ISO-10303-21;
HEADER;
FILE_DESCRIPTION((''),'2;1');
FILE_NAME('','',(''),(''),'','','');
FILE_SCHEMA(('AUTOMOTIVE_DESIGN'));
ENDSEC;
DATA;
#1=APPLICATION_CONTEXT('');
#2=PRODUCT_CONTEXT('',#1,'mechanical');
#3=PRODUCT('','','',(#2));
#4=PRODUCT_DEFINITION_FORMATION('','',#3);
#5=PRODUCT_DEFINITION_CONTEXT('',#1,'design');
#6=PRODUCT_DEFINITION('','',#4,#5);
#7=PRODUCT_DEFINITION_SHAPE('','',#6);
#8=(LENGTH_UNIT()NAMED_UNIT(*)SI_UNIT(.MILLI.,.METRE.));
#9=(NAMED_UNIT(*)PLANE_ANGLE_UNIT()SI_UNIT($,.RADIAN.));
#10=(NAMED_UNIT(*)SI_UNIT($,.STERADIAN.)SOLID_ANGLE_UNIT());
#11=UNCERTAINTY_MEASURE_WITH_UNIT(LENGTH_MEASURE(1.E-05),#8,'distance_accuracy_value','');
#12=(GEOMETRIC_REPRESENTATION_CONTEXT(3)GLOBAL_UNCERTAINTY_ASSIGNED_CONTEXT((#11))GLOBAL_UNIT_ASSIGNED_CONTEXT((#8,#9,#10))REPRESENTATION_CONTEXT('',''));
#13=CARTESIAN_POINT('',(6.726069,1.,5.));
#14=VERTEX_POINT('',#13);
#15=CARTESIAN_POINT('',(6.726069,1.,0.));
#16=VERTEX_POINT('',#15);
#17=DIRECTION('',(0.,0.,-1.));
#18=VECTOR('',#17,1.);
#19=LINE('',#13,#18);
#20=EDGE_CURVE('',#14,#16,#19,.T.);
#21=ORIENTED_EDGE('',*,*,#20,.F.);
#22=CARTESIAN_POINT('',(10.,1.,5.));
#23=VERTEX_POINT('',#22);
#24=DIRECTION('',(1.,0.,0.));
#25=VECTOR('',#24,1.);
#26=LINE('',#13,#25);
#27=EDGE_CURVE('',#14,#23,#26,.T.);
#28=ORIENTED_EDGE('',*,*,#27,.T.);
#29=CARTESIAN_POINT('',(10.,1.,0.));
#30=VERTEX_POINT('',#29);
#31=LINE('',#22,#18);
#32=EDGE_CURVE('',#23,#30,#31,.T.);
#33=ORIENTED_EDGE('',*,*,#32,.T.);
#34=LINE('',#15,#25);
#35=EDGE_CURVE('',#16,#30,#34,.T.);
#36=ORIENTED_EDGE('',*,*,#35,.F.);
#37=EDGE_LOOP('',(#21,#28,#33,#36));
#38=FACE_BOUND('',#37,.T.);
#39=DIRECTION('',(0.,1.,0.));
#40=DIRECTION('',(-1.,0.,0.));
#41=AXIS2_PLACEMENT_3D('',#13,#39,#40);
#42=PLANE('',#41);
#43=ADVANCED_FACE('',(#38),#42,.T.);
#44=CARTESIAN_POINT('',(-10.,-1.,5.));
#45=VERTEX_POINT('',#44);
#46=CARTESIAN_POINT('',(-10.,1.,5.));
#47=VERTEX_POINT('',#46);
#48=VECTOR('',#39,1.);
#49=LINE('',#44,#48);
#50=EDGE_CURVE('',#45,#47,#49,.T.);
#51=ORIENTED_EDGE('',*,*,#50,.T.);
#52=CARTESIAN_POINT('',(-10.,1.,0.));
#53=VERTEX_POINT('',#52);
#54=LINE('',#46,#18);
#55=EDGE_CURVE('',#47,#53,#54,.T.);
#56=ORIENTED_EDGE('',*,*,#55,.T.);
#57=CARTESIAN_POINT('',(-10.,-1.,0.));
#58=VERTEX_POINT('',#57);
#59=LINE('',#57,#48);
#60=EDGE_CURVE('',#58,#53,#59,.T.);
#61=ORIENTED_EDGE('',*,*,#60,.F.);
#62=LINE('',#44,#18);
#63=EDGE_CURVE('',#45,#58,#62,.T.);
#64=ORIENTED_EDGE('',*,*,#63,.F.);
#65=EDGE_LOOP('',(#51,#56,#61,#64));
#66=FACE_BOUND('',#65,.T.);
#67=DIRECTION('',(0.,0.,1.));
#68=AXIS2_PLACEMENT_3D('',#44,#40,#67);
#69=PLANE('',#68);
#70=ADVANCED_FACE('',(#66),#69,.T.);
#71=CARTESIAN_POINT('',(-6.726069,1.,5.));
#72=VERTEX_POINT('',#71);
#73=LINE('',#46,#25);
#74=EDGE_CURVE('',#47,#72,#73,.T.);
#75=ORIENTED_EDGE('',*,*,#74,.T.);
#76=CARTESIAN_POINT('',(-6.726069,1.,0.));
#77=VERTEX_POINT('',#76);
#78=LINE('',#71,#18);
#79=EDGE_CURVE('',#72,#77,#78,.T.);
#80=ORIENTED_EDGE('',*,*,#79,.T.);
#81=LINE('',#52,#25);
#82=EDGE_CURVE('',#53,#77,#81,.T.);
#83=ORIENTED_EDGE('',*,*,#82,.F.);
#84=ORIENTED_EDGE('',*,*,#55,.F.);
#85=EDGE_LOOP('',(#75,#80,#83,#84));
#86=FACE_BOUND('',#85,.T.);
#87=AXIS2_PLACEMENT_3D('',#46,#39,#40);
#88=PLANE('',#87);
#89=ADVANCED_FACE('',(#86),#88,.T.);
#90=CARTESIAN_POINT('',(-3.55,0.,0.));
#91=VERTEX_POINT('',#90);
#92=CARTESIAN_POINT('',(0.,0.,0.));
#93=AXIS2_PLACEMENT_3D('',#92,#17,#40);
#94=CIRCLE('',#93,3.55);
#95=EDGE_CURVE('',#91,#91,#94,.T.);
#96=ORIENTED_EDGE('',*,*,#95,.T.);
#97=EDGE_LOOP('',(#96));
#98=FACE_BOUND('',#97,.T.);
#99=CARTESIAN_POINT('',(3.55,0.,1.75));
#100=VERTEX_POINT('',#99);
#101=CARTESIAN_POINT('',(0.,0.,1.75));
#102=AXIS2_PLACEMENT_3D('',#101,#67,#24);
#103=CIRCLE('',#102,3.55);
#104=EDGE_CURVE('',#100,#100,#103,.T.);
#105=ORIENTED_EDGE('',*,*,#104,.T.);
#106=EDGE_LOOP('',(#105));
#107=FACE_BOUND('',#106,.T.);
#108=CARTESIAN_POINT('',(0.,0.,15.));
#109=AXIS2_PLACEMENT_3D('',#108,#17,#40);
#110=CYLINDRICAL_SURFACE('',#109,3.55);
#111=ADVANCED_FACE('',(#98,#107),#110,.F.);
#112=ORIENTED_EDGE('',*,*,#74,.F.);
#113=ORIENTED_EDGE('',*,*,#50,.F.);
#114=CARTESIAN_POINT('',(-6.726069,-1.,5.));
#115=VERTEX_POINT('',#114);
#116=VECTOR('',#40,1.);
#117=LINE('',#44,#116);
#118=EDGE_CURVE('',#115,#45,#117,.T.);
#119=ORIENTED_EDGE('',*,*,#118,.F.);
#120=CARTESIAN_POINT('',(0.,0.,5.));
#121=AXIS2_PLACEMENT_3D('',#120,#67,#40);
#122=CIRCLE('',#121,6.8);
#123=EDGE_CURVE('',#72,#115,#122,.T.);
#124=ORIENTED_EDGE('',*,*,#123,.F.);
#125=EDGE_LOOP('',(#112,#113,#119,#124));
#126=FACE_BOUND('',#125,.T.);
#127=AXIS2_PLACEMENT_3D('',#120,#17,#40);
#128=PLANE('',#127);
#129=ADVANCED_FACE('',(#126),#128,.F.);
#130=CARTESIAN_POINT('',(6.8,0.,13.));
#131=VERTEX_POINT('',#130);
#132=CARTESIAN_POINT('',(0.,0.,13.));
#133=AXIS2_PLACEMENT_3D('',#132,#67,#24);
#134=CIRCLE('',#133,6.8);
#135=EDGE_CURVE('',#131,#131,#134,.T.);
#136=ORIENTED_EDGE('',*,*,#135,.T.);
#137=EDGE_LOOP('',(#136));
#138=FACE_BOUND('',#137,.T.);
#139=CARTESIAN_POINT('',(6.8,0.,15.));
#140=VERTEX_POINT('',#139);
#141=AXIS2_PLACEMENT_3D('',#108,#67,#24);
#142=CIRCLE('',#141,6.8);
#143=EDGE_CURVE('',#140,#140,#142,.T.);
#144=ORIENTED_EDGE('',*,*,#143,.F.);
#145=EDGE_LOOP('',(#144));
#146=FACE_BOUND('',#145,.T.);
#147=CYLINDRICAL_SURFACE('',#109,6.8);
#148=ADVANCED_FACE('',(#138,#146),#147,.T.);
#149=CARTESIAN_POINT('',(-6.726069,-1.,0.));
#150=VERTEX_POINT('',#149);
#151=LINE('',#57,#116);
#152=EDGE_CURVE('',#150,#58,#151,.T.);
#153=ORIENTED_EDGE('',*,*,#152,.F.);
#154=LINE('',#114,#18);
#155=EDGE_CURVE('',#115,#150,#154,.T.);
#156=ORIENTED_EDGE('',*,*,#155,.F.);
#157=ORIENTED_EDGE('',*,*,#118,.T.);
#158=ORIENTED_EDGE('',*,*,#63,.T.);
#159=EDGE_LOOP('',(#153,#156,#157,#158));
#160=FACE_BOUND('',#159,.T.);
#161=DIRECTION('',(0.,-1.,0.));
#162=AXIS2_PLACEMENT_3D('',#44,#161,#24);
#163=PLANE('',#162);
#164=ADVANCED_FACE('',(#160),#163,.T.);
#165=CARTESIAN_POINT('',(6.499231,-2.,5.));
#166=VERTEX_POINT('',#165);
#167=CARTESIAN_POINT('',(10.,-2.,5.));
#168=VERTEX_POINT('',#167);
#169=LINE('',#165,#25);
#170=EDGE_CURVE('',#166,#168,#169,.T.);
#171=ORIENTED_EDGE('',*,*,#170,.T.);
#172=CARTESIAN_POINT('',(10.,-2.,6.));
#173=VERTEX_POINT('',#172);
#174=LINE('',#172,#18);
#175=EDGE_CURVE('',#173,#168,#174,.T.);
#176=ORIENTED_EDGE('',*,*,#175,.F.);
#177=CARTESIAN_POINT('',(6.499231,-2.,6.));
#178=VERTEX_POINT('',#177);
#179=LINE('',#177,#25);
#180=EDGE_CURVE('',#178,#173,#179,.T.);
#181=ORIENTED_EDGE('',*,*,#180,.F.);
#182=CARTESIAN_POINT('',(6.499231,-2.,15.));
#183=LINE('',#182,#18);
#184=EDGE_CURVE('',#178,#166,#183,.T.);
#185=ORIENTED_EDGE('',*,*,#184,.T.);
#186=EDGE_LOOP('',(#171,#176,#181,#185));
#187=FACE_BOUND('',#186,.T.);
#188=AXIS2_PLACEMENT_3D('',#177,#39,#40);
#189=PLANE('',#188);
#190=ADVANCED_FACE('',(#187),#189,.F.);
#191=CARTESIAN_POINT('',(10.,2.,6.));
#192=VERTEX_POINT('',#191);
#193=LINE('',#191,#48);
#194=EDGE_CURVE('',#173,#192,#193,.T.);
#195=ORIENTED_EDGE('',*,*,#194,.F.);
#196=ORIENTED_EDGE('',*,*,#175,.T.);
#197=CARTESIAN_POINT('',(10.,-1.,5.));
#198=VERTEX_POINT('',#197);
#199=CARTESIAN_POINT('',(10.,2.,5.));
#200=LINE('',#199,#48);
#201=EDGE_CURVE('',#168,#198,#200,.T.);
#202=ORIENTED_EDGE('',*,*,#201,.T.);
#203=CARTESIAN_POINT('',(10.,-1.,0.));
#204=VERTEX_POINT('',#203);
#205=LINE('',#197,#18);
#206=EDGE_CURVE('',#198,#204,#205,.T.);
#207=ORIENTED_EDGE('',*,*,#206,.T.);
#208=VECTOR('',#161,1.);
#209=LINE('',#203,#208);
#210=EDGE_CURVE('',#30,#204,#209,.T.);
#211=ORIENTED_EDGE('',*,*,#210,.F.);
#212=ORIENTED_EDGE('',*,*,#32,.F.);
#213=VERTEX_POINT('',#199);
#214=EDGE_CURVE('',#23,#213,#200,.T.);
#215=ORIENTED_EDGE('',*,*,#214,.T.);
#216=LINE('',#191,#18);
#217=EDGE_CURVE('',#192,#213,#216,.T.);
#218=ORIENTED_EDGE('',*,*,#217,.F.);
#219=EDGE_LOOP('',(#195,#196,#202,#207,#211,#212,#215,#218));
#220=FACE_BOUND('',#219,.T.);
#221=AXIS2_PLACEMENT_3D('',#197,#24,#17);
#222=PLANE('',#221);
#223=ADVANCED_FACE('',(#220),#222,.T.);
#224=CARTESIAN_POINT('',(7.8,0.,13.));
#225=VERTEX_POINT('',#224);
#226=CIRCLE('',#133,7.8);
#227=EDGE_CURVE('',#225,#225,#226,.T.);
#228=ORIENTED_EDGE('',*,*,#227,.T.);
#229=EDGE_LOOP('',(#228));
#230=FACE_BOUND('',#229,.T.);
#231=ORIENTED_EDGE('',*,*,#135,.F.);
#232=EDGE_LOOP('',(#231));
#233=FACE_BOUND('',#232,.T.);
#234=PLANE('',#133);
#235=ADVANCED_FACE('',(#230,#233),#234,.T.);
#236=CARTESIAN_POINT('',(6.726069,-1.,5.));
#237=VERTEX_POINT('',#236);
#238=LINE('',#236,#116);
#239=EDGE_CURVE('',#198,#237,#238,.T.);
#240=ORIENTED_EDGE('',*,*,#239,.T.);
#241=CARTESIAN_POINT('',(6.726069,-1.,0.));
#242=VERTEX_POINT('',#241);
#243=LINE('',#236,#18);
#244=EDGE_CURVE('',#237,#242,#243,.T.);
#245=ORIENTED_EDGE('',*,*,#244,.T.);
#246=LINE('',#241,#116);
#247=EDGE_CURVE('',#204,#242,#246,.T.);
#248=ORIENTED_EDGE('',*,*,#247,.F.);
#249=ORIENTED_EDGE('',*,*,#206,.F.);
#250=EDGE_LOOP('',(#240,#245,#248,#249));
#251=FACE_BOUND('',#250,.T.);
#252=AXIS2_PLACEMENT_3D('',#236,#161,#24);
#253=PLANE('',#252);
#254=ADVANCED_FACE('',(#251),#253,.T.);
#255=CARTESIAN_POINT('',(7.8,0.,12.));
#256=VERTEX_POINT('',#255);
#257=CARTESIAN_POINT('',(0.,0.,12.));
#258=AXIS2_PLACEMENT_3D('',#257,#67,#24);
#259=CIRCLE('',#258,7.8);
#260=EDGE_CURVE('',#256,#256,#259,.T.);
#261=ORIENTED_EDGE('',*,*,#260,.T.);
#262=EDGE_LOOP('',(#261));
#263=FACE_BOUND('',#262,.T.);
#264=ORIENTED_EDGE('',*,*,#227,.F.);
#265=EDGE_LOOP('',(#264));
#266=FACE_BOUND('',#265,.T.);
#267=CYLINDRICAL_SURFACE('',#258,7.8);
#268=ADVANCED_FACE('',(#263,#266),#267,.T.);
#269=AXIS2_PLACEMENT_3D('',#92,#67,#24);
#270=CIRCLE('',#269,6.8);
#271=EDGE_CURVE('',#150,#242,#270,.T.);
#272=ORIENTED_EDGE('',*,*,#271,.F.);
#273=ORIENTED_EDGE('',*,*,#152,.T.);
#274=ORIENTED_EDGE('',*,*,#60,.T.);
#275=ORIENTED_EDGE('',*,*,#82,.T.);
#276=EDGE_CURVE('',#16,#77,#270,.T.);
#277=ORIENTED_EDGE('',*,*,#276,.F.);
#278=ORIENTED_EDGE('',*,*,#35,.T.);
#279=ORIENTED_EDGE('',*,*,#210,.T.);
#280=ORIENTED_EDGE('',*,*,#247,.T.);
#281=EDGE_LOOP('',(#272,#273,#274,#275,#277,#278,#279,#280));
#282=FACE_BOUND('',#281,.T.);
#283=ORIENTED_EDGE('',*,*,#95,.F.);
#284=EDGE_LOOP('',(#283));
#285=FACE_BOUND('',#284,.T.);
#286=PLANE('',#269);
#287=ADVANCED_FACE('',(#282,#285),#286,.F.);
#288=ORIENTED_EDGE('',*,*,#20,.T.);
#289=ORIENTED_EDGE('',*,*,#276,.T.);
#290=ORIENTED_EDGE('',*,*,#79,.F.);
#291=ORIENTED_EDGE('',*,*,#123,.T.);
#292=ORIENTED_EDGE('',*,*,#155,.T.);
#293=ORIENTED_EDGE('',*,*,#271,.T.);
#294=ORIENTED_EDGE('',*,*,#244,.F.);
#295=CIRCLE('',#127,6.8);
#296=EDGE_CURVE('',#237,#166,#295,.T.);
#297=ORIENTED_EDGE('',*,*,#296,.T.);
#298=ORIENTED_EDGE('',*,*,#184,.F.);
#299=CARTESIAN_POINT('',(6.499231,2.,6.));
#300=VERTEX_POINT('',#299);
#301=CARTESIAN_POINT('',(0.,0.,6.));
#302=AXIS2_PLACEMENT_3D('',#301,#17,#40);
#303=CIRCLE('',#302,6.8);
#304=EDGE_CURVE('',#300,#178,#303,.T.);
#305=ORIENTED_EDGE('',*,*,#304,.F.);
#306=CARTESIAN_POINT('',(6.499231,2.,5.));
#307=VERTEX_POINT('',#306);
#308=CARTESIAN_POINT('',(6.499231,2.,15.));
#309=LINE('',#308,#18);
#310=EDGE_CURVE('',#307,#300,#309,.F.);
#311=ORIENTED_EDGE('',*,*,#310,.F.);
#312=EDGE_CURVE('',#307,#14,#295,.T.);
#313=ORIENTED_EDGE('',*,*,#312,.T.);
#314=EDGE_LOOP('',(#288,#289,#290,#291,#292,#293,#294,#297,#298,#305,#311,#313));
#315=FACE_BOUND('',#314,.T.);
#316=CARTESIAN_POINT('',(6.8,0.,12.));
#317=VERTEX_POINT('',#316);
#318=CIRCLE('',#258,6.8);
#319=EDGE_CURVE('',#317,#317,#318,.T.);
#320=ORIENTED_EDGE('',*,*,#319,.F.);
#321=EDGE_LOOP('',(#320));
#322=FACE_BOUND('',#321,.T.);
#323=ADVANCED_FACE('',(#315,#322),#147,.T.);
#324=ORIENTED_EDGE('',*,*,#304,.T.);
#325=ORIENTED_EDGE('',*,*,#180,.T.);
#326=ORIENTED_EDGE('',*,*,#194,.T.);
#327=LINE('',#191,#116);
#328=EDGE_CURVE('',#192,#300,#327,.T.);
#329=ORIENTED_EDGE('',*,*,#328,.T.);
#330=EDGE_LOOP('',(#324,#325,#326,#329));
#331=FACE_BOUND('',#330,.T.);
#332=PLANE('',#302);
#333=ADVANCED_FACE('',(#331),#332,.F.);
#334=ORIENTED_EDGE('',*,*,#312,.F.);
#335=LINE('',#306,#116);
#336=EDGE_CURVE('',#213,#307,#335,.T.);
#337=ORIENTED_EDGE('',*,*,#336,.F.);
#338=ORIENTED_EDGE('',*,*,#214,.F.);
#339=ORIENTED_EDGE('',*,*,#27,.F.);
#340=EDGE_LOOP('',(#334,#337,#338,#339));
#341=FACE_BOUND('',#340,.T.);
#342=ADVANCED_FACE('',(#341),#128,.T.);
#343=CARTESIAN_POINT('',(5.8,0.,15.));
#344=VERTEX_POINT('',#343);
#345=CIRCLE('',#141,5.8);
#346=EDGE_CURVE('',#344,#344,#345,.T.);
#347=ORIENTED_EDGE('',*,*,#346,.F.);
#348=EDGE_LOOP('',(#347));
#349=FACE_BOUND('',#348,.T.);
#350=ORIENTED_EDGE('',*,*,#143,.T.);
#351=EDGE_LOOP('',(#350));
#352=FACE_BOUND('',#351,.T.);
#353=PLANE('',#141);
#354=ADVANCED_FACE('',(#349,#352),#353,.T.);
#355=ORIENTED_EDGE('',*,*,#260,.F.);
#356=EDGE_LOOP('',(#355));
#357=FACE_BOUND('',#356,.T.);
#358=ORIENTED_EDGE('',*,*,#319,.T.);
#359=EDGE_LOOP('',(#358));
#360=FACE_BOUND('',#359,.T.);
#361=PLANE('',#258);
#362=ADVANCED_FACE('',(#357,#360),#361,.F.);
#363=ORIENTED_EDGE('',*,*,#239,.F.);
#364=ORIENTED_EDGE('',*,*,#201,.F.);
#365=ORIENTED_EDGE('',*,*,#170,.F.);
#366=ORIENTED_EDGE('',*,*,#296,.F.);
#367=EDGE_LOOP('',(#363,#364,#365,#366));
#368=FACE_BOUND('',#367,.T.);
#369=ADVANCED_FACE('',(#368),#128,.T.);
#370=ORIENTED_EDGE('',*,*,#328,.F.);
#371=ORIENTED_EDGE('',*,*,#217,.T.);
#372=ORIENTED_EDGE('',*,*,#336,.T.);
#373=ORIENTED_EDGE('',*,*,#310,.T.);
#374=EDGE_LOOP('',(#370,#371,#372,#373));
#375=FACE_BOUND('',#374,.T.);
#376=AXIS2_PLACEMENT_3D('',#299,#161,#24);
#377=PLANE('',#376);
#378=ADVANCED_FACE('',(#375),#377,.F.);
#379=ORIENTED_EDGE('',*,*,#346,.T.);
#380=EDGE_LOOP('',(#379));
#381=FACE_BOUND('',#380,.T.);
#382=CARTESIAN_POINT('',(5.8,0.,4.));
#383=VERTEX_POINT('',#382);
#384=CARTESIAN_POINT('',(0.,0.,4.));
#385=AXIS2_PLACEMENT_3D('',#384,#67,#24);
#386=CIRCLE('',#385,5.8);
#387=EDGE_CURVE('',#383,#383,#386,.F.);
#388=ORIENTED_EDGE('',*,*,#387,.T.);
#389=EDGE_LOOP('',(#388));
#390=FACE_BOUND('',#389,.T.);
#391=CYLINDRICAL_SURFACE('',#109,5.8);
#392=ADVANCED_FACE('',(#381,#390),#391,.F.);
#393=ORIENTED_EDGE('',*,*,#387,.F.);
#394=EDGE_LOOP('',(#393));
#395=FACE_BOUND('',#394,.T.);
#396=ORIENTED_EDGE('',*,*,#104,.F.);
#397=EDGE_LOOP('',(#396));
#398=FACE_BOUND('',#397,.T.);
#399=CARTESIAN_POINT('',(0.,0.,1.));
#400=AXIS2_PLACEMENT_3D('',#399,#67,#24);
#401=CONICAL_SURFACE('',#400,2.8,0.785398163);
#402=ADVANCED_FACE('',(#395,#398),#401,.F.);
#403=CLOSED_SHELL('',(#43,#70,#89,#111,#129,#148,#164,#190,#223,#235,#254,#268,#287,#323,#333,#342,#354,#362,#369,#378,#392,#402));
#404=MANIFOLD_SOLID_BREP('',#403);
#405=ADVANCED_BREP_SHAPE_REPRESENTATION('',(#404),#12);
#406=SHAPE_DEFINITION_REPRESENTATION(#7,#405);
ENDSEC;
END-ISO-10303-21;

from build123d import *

# Parameters (mm, degrees)
ESQUISSE1_R             = 6.8
BOSS_EXTRU_1_DEPTH      = 15
COQUE1_T                = -1
ESQUISSE2_R             = 3.55
ENL_V_MAT_EXTRU_1_DEPTH = 15
CHANFREIN1_SIZE         = 3
BOSS_EXTRU_2_DEPTH      = 5
BOSS_EXTRU_3_DEPTH      = 1
BOSS_EXTRU_4_START      = -3
ESQUISSE5_R             = 7.8
ESQUISSE5_R_2           = 6.8
BOSS_EXTRU_4_DEPTH      = 1


with BuildPart() as part:
    # Esquisse1 → Boss.-Extru.1 (new body)
    with BuildSketch(Plane.XY):
        Circle(ESQUISSE1_R)
    extrude(amount=BOSS_EXTRU_1_DEPTH)

    # Coque1
    coque1_openings = [part.faces().sort_by_distance(p)[0] for p in [
        (0, 0, 15),
    ]]
    offset(amount=COQUE1_T, openings=coque1_openings, kind=Kind.INTERSECTION)

    # Esquisse2 → Enlèv. mat.-Extru.1 (cut)
    with BuildSketch(Plane(origin=(0, 0, 0), x_dir=(-1, 0, 0), z_dir=(0, 0, -1))):
        Circle(ESQUISSE2_R)
    extrude(amount=-ENL_V_MAT_EXTRU_1_DEPTH, mode=Mode.SUBTRACT)

    # Chanfrein1
    # the kernel refuses this chamfer: 3 mm, written as the material it adds along each edge
    with BuildSketch(Plane(origin=(0, 0, 1), x_dir=(1, 0, 0), z_dir=(0, 1, 0))) as chanfrein1_piece_1_section:
        Polygon((5.8, -CHANFREIN1_SIZE), (5.8 - CHANFREIN1_SIZE, 0), (5.8, 0), align=None)
    chanfrein1_piece_1 = revolve(axis=Axis((0, 0, 1), (0, 0, -1)), mode=Mode.PRIVATE)
    chanfrein1_piece_1 = chanfrein1_piece_1 - Plane(origin=(0, 0, 2.8805317), x_dir=(-1, 0, 0), z_dir=(0, 0, -1)) * Cylinder(3.55, 24, mode=Mode.PRIVATE)
    add(chanfrein1_piece_1)

    # Esquisse3 → Boss.-Extru.2 (add)
    with BuildSketch(Plane(origin=(0, 0, 0), x_dir=(-1, 0, 0), z_dir=(0, 0, -1))):
        with BuildLine():
            Line((-6.726068688, 1), (-10, 1))
            Line((-10, 1), (-10, -1))
            Line((-10, -1), (-6.726068688, -1))
            ThreePointArc((-6.726068688, -1), (-6.8, 0), (-6.726068688, 1))
        make_face()
        with BuildLine():
            Line((10, -1), (6.726068688, -1))
            ThreePointArc((6.726068688, -1), (6.8, 0), (6.726068688, 1))
            Line((6.726068688, 1), (10, 1))
            Line((10, 1), (10, -1))
        make_face()
    extrude(amount=-BOSS_EXTRU_2_DEPTH)

    # Esquisse4 → Boss.-Extru.3 (add)
    with BuildSketch(Plane.XY.offset(5)):
        with BuildLine():
            Line((10, 2), (10, -2))
            Line((10, -2), (6.499230724, -2))
            Line((6.499230724, -2), (5.444263036, -2))
            ThreePointArc((5.444263036, -2), (5.8, 0), (5.444263036, 2))
            Line((5.444263036, 2), (6.499230724, 2))
            Line((6.499230724, 2), (10, 2))
        make_face()
    extrude(amount=BOSS_EXTRU_3_DEPTH)

    # Esquisse5 → Boss.-Extru.4 (add)
    with BuildSketch(Plane.XY.offset(15).offset(BOSS_EXTRU_4_START)):
        Circle(ESQUISSE5_R)
        with Locations(Location((0, 0, 0), (0, 0, 171.543480665))):
            Circle(ESQUISSE5_R_2, mode=Mode.SUBTRACT)
    extrude(amount=BOSS_EXTRU_4_DEPTH)


solid = part.part
